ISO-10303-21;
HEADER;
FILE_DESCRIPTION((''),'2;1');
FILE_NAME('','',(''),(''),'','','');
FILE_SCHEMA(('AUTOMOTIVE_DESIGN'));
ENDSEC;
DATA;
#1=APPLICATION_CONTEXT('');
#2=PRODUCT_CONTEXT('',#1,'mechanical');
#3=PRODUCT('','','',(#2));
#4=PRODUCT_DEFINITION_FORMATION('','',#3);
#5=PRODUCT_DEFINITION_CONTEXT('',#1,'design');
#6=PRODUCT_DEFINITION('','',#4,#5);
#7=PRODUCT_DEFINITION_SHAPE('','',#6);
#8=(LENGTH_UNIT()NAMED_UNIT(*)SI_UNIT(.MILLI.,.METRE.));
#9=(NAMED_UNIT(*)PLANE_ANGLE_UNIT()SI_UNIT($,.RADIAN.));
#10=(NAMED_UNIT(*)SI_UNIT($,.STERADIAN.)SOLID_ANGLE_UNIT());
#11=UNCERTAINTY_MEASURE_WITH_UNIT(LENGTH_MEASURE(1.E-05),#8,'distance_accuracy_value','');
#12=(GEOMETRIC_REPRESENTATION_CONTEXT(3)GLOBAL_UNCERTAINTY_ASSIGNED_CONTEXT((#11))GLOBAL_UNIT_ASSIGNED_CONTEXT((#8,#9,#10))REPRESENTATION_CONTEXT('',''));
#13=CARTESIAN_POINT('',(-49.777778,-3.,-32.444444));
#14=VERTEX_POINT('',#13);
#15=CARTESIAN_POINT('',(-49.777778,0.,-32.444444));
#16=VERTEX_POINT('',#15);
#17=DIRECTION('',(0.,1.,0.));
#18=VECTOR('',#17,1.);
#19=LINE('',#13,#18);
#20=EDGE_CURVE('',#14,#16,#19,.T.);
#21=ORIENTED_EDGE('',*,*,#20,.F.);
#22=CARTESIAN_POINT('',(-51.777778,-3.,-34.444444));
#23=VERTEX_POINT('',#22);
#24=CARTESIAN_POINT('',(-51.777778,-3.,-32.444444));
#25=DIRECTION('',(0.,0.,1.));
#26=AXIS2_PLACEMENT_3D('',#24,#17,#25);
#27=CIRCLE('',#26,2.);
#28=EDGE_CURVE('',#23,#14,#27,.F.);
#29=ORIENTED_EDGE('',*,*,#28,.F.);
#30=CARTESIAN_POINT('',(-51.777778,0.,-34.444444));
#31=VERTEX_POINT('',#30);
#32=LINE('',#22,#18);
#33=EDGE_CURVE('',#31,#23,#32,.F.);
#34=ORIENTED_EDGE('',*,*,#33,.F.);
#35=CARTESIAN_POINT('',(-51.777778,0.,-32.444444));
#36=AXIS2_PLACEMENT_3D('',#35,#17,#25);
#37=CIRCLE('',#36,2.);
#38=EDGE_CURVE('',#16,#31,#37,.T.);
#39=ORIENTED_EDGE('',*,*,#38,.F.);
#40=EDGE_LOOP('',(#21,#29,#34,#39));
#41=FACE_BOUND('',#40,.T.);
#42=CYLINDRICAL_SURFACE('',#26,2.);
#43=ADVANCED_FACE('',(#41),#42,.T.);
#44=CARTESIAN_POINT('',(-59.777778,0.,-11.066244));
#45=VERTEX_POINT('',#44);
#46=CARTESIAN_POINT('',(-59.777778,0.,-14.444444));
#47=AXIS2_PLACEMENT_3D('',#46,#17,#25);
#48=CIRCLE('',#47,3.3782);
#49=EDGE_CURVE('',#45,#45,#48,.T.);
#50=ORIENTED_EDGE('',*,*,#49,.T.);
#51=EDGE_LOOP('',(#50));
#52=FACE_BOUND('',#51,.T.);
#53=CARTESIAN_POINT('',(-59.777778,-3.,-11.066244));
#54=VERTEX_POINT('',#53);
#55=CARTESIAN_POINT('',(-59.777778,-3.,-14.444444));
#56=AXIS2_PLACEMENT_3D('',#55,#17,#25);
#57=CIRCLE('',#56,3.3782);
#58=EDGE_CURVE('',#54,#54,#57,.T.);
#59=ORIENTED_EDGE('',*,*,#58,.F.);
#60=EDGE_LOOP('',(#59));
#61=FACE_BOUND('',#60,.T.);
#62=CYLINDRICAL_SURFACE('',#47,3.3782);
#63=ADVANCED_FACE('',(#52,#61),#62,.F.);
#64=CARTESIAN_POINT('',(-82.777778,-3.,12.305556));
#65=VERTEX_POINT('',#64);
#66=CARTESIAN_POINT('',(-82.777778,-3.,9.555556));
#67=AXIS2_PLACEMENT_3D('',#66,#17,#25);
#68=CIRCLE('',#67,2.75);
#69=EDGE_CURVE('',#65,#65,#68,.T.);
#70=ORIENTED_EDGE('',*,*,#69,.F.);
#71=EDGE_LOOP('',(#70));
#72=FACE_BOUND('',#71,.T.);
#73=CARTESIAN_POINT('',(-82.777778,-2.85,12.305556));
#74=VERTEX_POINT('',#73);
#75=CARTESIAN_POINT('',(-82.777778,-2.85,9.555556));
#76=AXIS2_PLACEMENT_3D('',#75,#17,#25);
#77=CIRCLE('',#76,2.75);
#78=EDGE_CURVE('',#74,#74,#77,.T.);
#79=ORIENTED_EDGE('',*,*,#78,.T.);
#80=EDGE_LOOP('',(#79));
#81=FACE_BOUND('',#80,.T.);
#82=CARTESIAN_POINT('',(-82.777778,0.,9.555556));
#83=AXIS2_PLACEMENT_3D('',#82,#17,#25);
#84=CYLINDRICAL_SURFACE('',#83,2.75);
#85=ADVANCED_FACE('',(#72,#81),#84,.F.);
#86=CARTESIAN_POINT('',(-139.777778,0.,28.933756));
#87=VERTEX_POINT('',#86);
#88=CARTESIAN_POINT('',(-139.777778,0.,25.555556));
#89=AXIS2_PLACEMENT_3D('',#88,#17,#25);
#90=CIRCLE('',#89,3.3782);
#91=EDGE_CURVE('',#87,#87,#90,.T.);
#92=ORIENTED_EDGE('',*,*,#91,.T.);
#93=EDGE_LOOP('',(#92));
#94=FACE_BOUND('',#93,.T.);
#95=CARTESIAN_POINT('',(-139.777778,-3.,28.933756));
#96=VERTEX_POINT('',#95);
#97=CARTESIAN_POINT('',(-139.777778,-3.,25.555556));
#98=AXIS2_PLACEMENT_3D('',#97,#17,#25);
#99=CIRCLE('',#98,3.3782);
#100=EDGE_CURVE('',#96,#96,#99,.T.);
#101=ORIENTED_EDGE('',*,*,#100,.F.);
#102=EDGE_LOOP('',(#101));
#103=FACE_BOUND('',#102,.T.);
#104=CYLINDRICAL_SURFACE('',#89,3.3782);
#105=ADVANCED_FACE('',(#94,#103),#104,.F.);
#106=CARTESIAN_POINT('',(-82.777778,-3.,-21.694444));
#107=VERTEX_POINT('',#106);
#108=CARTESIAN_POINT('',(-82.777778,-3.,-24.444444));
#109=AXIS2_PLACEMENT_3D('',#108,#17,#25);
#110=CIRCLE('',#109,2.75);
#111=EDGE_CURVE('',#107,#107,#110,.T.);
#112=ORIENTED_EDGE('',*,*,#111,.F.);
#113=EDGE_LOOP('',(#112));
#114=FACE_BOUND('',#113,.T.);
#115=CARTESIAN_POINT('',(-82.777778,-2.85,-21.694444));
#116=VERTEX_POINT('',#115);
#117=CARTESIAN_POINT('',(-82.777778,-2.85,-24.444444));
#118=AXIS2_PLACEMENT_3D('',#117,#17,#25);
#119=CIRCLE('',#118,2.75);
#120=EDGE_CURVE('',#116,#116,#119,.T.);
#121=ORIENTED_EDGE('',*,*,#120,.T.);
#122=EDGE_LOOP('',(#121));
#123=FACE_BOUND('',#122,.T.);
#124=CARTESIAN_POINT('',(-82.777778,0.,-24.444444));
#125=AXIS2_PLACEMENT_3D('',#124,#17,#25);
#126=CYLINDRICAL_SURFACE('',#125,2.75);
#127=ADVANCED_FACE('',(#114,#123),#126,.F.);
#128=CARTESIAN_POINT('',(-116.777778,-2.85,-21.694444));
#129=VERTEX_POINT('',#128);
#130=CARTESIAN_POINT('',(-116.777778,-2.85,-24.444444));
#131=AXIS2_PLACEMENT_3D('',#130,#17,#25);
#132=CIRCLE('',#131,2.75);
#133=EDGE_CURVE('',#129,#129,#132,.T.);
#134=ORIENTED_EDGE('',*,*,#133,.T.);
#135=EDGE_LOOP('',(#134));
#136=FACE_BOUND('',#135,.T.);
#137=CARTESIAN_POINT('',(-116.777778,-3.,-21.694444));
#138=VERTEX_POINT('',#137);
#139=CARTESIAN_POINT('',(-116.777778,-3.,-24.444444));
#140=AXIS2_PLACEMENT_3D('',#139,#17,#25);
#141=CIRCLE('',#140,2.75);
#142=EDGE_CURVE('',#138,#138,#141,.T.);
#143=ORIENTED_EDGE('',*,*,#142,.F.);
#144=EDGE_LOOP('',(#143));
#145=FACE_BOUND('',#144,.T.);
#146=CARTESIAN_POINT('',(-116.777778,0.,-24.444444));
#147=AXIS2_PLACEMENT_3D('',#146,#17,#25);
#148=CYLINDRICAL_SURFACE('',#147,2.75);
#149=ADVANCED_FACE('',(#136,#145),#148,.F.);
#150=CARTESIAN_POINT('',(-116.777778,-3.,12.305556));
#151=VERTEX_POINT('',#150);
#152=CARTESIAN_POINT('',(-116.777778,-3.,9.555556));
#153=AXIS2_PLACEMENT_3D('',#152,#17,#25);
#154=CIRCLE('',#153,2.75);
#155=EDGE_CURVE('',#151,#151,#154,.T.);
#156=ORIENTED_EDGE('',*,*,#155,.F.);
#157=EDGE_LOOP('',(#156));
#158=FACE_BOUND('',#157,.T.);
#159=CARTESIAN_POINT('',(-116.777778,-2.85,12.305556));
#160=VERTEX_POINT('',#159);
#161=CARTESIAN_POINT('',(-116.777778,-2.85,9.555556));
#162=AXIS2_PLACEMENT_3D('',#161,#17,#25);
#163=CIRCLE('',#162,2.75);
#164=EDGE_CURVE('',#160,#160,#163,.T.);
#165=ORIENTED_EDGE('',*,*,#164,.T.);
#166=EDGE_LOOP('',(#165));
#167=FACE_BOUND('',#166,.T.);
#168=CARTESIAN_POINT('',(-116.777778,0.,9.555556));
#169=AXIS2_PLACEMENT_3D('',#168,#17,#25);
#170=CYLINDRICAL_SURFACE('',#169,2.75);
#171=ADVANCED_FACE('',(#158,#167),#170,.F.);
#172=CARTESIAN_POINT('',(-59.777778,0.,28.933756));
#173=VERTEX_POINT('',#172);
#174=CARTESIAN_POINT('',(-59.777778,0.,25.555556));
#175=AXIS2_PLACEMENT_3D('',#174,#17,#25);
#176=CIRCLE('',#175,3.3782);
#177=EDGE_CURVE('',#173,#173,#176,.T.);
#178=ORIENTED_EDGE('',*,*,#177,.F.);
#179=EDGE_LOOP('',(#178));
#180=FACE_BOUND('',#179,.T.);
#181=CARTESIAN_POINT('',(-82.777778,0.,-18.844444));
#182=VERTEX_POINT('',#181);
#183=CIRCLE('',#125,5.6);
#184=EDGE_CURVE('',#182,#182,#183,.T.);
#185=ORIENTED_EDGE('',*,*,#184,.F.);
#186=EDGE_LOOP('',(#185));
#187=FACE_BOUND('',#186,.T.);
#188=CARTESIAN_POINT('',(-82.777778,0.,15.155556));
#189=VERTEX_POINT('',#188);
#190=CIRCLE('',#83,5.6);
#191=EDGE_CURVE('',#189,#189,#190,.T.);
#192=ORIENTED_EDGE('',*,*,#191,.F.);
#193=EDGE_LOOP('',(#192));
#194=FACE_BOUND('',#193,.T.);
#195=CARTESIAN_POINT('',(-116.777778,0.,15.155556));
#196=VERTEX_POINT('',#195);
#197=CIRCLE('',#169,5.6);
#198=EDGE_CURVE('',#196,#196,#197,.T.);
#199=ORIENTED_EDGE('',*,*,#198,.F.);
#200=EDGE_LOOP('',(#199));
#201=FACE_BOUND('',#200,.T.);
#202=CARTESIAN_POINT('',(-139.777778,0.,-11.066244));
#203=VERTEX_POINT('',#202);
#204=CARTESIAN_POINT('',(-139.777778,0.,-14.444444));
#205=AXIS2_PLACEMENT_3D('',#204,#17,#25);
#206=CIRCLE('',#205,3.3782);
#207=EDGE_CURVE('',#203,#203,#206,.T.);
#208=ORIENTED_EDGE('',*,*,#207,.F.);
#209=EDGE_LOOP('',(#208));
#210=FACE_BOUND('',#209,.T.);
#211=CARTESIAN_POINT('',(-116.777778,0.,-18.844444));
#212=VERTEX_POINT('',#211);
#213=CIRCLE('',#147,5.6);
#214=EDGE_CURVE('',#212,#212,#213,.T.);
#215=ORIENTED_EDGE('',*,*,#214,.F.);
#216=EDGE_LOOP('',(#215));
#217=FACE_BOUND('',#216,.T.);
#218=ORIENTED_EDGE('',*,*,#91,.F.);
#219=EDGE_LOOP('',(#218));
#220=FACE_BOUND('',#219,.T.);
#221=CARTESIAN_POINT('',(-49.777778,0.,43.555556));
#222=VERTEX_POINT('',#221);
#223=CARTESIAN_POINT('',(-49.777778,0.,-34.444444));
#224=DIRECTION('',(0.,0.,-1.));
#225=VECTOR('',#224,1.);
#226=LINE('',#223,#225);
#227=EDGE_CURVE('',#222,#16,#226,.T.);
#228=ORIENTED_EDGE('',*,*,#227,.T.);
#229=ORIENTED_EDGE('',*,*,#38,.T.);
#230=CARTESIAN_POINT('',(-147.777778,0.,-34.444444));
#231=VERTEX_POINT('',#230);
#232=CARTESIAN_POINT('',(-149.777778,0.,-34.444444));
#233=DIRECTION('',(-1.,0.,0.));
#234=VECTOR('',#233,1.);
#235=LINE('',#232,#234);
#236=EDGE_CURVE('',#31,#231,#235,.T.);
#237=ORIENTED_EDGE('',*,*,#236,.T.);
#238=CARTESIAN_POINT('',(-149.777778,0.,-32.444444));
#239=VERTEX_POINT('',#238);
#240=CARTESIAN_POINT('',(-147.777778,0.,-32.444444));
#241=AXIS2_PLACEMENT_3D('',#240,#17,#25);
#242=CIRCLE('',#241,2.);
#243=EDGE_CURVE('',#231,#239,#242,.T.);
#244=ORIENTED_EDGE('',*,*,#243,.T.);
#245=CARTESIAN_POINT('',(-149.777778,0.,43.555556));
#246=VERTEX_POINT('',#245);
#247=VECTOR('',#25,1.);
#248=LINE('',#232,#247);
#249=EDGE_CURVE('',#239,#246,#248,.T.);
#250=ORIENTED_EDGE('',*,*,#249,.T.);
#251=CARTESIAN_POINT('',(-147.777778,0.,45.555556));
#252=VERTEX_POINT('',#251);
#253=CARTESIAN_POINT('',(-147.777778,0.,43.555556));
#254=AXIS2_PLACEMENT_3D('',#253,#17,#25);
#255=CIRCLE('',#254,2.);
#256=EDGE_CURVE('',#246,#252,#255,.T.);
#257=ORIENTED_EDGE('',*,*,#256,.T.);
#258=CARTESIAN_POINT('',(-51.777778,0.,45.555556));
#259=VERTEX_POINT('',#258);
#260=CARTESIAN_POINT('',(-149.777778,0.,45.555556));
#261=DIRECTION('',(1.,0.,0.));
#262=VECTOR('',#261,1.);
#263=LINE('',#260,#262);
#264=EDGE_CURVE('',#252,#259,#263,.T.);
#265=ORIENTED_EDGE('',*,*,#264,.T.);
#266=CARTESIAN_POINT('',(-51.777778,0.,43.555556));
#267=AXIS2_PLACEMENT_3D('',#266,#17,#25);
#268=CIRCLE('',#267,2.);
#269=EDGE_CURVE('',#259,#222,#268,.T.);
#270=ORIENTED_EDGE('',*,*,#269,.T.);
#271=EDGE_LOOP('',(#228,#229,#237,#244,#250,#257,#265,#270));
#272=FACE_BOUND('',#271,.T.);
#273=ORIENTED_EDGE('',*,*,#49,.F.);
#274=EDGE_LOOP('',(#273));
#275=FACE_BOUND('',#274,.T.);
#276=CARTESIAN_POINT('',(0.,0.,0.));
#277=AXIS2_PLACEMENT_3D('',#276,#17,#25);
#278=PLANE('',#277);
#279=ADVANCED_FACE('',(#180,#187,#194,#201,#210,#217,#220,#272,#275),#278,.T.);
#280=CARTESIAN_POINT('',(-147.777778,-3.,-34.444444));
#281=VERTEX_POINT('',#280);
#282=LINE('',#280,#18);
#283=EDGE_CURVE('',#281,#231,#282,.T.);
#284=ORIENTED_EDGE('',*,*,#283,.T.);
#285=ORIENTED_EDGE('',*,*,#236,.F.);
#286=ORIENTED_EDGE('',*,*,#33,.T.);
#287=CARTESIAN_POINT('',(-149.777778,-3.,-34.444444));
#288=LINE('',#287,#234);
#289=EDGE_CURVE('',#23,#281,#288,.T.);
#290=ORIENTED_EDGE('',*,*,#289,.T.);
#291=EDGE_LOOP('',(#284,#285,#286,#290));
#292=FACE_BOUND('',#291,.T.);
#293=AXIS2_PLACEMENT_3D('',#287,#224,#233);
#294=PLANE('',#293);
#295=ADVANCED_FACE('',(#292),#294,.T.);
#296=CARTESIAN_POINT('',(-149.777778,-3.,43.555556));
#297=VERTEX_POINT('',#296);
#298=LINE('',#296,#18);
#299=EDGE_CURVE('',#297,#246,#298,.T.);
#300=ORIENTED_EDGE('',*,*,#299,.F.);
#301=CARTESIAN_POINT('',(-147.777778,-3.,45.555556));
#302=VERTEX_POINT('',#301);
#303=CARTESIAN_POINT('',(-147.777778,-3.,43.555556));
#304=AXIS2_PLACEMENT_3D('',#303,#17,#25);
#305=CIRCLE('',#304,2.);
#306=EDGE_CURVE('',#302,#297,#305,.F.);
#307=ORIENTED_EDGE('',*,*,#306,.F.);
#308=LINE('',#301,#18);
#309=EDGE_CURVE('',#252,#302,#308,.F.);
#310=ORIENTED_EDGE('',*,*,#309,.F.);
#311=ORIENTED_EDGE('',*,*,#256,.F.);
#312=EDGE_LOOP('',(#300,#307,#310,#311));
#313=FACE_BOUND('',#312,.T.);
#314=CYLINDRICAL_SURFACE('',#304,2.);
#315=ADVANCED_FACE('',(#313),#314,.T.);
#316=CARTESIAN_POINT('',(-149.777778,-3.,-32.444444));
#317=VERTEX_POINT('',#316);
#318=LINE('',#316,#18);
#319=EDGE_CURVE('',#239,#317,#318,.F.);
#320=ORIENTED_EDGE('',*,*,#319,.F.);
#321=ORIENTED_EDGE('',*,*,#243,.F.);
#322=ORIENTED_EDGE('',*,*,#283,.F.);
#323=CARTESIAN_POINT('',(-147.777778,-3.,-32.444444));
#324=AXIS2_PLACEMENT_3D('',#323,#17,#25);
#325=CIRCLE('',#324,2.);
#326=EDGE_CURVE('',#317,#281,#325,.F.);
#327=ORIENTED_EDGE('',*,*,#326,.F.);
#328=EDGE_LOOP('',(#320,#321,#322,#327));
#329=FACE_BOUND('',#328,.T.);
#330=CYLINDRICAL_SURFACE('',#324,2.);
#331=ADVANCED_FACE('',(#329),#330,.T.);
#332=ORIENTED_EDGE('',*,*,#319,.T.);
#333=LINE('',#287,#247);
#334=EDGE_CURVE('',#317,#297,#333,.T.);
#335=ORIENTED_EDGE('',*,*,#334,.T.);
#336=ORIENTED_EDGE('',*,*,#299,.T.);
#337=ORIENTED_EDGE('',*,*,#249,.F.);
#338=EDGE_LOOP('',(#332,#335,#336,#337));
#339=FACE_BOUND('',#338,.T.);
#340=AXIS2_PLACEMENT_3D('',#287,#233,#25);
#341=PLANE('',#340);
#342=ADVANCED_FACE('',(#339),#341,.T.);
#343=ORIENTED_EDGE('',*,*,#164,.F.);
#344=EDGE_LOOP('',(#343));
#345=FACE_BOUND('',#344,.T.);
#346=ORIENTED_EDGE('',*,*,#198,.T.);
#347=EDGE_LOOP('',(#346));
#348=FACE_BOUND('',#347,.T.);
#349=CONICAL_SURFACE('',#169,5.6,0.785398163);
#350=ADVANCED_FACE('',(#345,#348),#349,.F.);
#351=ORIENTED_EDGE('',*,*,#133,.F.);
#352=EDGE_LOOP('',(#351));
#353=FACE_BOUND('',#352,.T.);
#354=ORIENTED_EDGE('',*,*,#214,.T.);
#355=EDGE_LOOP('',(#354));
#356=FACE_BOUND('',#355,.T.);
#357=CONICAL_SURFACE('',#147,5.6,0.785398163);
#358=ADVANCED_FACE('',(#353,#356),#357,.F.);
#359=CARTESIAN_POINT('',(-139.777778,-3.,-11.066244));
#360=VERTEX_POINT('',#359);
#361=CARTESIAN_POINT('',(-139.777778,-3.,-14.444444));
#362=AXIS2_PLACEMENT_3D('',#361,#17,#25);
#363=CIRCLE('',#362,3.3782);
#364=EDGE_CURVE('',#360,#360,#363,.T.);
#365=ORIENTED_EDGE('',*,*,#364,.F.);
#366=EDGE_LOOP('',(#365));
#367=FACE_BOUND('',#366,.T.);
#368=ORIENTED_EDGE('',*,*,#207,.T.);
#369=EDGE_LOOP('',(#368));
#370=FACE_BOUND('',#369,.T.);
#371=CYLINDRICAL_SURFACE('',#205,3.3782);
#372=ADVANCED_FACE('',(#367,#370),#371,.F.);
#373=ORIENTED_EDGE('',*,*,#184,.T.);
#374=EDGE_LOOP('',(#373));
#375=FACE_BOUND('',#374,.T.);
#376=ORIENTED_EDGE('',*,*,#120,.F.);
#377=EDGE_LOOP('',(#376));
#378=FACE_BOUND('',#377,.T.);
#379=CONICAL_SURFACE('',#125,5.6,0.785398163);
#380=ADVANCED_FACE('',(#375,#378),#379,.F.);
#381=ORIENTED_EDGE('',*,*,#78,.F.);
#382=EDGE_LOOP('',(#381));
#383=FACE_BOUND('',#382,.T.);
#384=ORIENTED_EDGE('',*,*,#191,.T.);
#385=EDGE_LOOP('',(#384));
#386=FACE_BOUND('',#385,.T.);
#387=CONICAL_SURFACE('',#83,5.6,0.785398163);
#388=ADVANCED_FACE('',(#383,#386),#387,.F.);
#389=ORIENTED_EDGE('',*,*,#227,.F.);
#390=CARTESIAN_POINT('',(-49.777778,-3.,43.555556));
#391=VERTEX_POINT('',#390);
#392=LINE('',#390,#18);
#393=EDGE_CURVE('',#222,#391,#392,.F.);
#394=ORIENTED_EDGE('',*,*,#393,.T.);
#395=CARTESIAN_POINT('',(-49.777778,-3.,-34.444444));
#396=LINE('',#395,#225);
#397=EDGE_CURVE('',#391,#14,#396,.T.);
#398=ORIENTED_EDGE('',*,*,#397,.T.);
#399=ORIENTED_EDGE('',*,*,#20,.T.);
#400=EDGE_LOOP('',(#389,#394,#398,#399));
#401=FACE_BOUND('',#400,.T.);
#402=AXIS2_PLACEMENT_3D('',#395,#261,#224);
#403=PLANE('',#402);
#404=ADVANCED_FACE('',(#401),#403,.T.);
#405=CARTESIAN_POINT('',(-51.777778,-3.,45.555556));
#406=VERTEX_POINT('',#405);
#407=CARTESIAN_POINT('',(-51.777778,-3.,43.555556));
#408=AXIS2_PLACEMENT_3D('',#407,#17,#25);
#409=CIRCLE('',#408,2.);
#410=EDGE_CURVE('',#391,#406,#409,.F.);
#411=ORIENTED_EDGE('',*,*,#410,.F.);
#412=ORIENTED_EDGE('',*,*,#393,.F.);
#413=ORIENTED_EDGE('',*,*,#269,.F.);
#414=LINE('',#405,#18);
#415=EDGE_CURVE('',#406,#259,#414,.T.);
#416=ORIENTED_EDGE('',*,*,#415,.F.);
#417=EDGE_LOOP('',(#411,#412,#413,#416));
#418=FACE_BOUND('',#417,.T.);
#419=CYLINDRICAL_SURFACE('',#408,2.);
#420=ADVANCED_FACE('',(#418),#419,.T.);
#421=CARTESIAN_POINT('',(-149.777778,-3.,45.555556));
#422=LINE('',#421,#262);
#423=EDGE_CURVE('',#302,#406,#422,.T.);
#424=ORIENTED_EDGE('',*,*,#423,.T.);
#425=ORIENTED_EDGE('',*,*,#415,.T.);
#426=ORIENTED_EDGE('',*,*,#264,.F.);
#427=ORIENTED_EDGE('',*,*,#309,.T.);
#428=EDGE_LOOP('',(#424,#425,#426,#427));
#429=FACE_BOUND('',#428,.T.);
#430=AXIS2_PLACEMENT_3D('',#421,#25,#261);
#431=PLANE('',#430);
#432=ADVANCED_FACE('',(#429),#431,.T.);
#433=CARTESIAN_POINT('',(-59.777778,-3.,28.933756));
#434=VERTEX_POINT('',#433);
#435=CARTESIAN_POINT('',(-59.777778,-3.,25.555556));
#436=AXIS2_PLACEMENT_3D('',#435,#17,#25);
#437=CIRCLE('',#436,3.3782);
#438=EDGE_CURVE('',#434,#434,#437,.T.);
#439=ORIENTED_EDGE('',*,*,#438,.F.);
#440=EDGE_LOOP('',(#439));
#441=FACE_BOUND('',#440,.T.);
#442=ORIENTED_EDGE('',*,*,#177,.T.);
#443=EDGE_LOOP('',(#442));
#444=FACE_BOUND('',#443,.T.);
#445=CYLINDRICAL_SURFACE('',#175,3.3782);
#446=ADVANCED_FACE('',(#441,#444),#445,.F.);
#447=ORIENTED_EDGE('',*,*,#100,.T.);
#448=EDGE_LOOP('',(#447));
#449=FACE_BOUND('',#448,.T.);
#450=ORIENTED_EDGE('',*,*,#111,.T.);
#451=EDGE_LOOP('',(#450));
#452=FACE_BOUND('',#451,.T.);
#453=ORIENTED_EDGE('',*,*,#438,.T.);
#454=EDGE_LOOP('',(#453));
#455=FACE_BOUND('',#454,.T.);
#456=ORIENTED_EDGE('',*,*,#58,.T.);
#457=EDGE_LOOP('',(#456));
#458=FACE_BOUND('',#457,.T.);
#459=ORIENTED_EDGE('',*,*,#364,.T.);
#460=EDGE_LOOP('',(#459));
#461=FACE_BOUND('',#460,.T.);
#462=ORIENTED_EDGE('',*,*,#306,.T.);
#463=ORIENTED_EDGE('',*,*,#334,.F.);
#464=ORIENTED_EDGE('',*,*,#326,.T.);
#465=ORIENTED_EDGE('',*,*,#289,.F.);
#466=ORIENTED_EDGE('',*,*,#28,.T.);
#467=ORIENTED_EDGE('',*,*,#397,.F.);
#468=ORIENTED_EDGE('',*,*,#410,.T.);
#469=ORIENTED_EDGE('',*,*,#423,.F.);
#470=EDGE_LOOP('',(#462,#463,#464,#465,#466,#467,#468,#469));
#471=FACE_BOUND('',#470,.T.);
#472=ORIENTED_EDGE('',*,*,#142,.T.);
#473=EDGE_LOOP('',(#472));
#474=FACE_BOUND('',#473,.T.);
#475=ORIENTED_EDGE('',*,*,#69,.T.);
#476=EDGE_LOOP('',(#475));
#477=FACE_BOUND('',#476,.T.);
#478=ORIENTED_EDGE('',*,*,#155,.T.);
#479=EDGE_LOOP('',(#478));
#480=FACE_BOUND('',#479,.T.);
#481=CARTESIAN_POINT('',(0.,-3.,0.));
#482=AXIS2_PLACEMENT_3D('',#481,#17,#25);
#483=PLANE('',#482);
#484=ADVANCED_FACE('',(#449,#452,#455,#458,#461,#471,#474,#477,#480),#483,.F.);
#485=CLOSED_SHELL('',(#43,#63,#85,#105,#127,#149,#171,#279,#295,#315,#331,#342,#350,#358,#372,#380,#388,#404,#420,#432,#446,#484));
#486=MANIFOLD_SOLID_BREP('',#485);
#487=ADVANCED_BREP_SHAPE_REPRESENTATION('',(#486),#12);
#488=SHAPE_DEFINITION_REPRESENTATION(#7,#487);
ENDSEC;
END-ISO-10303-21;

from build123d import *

# Parameters (mm, degrees)
CROQUIS1_W                                   = 100
CROQUIS1_H                                   = 80
BRIDA_BASE1_DEPTH                            = 3
REDONDEO1_R                                  = 2
TALADRO_DE_MARGEN_PARA_1_41_D                = 6.7564
REFRENTADO_PARA_TORNILLO_TAP_N_CON_C_2_COUNT = 2
REFRENTADO_PARA_TORNILLO_TAP_N_CON_C_2_PITCH = 34
REFRENTADO_PARA_TORNILLO_TAP_N_CON_C_3_COUNT = 2
REFRENTADO_PARA_TORNILLO_TAP_N_CON_C_3_PITCH = 48.083261121
REFRENTADO_PARA_TORNILLO_TAP_N_CON_C_4_COUNT = 2
REFRENTADO_PARA_TORNILLO_TAP_N_CON_C_4_PITCH = 34


# Sheet-metal steps are written as plain solids
with BuildPart() as part:
    # Croquis1 → Brida base1 (new body)
    with BuildSketch(Plane(origin=(0, 0, 0), x_dir=(1, 0, 0), z_dir=(0, 1, 0))):
        with Locations((-99.777777778, -5.555555556)):
            Rectangle(CROQUIS1_W, CROQUIS1_H)
    extrude(amount=-BRIDA_BASE1_DEPTH)

    # Redondeo1
    redondeo1_edges = [part.edges().sort_by_distance(p)[0] for p in [
        (-149.777777778, -1.5, -34.444444444),
        (-49.777777778, -1.5, -34.444444444),
        (-49.777777778, -1.5, 45.555555556),
        (-149.777777778, -1.5, 45.555555556),
    ]]
    fillet(redondeo1_edges, radius=REDONDEO1_R)

    # Taladro de margen para 1/41 (through all)
    with Locations(Plane(origin=(0, 0, 0), x_dir=(1, 0, 0), z_dir=(0, 1, 0))):
        with Locations((-139.777777778, -25.555555556), (-59.777777778, -25.555555556), (-139.777777778, 14.444444444), (-59.777777778, 14.444444444)):
            Hole(TALADRO_DE_MARGEN_PARA_1_41_D / 2)

    # Croquis9 → Refrentado para tornillo tapón con cabeza plana de clavija de M51 (revolve, cut)
    with BuildSketch(Plane(origin=(-116.777777778, 0, -24.444444444), x_dir=(0, 0, 1), z_dir=(1, 0, 0))):
        Polygon((0, 0), (0, 3), (2.75, 3), (2.75, 2.85), (5.6, 0), align=None)
    refrentado_para_tornillo_tap_n_con_cabez = revolve(axis=Axis((-116.777777778, 6.35, -24.444444444), (0, -1, 0)), mode=Mode.SUBTRACT)

    # Refrentado para tornillo tap_n con c 2: Refrentado para tornillo tapón con cabeza plana de clavija de M51 ×2
    with Locations(*[(i * REFRENTADO_PARA_TORNILLO_TAP_N_CON_C_2_PITCH, 0, 0) for i in range(1, REFRENTADO_PARA_TORNILLO_TAP_N_CON_C_2_COUNT)]):
        add(refrentado_para_tornillo_tap_n_con_cabez, mode=Mode.SUBTRACT)

    # Refrentado para tornillo tap_n con c 3: Refrentado para tornillo tapón con cabeza plana de clavija de M51 ×2
    with Locations(*[Vector(0.7071067811865476, 0, 0.7071067811865476) * (i * REFRENTADO_PARA_TORNILLO_TAP_N_CON_C_3_PITCH) for i in range(1, REFRENTADO_PARA_TORNILLO_TAP_N_CON_C_3_COUNT)]):
        add(refrentado_para_tornillo_tap_n_con_cabez, mode=Mode.SUBTRACT)

    # Refrentado para tornillo tap_n con c 4: Refrentado para tornillo tapón con cabeza plana de clavija de M51 ×2
    with Locations(*[(0, 0, i * REFRENTADO_PARA_TORNILLO_TAP_N_CON_C_4_PITCH) for i in range(1, REFRENTADO_PARA_TORNILLO_TAP_N_CON_C_4_COUNT)]):
        add(refrentado_para_tornillo_tap_n_con_cabez, mode=Mode.SUBTRACT)


solid = part.part
